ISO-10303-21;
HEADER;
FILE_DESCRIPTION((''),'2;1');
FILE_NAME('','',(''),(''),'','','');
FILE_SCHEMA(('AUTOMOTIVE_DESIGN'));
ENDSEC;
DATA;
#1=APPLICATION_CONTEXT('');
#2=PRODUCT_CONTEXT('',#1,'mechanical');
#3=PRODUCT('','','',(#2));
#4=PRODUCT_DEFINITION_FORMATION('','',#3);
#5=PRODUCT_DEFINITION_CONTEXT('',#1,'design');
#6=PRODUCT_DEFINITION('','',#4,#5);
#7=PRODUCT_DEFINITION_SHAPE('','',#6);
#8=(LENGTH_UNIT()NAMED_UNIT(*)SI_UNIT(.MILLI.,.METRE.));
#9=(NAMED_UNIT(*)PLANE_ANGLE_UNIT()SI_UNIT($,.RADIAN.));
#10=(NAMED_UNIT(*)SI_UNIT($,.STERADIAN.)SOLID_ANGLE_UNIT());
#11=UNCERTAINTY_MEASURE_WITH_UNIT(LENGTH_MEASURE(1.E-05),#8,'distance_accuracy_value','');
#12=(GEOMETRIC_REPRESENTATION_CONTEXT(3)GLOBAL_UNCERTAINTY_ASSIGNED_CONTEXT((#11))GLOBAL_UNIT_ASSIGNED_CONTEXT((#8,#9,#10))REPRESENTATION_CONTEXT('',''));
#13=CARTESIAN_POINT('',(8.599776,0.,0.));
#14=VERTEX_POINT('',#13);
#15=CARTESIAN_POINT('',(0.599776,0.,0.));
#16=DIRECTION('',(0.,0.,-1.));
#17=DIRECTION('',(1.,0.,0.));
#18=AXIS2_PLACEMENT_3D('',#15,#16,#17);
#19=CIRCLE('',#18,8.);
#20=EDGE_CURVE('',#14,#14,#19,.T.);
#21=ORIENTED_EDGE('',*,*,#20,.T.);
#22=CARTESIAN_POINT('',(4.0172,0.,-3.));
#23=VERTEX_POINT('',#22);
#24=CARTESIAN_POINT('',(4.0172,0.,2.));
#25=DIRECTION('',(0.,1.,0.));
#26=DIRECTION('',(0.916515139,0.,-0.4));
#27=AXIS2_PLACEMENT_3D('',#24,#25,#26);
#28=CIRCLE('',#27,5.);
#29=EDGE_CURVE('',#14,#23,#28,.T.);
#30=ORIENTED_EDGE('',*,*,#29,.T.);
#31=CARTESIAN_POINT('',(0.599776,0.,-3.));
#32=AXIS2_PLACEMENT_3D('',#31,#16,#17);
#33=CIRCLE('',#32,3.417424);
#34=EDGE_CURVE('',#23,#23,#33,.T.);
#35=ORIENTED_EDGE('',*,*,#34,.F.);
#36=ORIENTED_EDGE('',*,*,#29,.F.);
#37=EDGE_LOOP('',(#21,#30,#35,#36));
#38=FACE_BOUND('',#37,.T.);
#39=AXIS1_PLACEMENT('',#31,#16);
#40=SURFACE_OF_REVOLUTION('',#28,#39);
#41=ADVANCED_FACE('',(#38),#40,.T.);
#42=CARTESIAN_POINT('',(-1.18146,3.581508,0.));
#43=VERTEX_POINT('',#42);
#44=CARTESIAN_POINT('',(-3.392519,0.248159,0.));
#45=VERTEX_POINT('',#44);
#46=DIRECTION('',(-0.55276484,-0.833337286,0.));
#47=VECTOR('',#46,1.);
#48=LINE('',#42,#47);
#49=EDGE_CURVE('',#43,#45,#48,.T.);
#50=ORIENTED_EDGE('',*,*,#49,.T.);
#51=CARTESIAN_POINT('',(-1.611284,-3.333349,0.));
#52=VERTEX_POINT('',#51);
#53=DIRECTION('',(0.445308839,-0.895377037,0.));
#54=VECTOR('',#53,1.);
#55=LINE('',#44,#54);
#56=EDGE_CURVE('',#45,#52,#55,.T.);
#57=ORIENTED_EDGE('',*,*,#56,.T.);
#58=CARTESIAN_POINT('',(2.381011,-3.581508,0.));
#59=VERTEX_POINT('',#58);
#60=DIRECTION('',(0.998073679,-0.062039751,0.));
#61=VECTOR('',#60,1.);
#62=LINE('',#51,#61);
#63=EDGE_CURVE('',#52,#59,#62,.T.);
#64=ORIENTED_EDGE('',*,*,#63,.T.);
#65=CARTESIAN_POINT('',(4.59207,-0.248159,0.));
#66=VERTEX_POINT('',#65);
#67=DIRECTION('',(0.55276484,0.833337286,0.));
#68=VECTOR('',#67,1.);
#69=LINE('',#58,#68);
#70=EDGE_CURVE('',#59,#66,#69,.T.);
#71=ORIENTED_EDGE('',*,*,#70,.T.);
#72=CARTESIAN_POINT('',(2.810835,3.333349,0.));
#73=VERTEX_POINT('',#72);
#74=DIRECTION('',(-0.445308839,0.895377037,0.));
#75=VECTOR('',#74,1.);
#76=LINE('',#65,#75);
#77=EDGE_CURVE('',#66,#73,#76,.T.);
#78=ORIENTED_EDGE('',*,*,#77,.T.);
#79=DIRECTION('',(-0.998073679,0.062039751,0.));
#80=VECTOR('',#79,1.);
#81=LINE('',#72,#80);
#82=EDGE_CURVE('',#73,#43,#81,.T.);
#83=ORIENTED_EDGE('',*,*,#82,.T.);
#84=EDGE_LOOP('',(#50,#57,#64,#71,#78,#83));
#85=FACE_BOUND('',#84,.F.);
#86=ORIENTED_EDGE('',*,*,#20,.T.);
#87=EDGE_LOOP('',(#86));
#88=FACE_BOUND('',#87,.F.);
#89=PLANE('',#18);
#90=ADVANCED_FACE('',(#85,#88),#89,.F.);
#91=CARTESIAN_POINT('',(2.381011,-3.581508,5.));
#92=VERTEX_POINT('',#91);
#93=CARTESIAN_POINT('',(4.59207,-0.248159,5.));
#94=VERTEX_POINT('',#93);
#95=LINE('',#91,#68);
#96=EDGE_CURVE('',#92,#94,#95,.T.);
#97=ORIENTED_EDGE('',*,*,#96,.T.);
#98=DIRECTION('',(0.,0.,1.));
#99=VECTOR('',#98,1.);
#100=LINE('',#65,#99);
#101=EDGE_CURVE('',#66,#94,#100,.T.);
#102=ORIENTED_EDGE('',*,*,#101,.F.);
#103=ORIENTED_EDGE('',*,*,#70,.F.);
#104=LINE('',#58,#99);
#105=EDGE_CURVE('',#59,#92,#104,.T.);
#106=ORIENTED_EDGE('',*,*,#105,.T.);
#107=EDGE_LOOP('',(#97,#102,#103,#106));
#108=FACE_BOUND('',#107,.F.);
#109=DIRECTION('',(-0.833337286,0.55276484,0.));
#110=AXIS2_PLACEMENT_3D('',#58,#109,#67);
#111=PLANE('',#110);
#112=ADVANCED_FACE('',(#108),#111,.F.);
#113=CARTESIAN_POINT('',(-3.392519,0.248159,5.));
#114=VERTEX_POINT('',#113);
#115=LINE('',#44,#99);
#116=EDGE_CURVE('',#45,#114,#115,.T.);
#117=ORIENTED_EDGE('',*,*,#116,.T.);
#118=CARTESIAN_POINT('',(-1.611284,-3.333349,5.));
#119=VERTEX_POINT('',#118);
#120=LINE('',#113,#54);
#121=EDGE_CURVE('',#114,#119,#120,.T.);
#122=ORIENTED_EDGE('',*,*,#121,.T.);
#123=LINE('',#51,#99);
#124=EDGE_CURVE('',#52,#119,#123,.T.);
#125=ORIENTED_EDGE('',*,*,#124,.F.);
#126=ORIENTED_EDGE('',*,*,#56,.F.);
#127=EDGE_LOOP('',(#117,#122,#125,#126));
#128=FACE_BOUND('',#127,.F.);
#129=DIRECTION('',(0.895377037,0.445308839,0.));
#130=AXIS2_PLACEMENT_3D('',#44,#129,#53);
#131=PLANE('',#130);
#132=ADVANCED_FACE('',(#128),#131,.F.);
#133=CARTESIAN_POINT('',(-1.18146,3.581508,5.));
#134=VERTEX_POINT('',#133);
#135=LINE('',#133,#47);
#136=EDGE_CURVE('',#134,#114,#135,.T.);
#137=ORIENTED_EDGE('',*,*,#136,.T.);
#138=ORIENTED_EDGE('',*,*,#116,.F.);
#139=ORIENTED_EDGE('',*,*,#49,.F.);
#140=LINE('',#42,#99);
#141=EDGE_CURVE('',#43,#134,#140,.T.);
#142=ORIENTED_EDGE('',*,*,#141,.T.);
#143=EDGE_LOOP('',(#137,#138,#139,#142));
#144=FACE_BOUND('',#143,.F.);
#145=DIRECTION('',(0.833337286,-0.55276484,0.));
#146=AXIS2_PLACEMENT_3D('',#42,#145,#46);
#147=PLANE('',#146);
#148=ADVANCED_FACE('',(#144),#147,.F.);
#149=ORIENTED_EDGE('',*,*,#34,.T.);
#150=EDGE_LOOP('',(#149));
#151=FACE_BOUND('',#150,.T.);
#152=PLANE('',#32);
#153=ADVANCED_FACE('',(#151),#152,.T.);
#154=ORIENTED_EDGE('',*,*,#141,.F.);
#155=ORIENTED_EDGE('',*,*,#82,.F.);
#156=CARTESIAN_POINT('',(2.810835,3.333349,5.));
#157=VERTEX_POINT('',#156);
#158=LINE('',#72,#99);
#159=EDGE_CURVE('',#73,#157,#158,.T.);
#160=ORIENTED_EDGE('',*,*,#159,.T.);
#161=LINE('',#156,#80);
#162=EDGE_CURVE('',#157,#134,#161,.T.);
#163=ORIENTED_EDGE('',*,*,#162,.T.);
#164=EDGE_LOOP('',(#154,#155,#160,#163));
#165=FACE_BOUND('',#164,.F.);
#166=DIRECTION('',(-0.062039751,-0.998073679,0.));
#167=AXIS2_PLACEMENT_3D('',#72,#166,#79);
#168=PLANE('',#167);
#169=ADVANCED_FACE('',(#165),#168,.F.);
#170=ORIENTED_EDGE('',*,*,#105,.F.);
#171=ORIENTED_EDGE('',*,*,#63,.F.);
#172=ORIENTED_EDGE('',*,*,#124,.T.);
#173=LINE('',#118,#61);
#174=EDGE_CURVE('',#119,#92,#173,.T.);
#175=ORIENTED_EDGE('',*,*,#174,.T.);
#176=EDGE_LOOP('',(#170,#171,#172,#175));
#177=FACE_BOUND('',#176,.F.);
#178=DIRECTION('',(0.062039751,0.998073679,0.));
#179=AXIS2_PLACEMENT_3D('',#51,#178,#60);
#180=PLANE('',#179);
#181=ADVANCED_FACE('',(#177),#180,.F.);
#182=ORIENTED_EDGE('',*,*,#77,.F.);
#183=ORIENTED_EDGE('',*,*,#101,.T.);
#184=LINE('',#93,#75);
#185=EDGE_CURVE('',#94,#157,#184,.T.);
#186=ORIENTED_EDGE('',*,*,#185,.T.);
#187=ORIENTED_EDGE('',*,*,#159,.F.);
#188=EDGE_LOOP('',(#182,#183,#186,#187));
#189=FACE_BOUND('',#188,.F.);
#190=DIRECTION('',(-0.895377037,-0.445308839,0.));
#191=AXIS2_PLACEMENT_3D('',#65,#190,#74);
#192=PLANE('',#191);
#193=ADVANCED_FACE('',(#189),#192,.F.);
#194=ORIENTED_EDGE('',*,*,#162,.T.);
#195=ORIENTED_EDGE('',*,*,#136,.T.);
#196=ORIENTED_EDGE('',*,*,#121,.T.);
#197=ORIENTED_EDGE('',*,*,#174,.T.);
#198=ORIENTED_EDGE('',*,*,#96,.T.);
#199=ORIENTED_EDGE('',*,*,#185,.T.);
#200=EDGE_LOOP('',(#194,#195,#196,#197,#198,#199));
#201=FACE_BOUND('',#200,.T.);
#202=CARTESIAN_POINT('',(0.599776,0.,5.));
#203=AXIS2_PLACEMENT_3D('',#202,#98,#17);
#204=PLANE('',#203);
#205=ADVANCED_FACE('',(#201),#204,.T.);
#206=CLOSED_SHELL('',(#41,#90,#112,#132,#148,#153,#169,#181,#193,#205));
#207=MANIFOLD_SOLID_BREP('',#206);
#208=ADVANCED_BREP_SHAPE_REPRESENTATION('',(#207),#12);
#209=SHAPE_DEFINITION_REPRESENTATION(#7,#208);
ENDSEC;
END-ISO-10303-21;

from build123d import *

# Parameters (mm, degrees)
F1_DEPTH = 5
F2_R     = 8
F3_DEPTH = 3


# Not quite as in the source:
# - a fillet or chamfer that OpenCascade refuses, or shapes differently, is made with other operations: its cross-section is extruded or revolved along the edge and cut away or added


with BuildPart() as f1:
    # F0 (on Top) → F1 (new body)
    with BuildSketch(Plane.XY):
        Polygon((4.5920703038, -0.2481590048), (2.8108349475, 3.333349142), (-1.1814597696, 3.5815081468), (-3.3925191305, 0.2481590048), (-1.6112837742, -3.333349142), (2.3810109429, -3.5815081468), align=None)
    extrude(amount=F1_DEPTH)

    # F2 (on face) → F3 (join)
    with BuildSketch(Plane(origin=(0, 0, 0), x_dir=(1, 0, 0), z_dir=(0, 0, -1))):
        with Locations((0.5997755867, 0)):
            Circle(F2_R)
        Polygon((2.8108349475, -3.333349142), (-1.1814597696, -3.5815081468), (-3.3925191305, -0.2481590048), (-1.6112837742, 3.333349142), (2.3810109429, 3.5815081468), (4.5920703038, 0.2481590048), align=None, mode=Mode.SUBTRACT)
        Polygon((-3.3925191305, -0.2481590048), (-1.1814597696, -3.5815081468), (2.8108349475, -3.333349142), (4.5920703038, 0.2481590048), (2.3810109429, 3.5815081468), (-1.6112837742, 3.333349142), align=None)
    extrude(amount=F3_DEPTH)

    # F4: fillet of radius 5 on 1 edges, made by hand

    # F4_s1 → F4_t2 (revolve, cut)
    with BuildSketch(Plane.XZ):
        with BuildLine():
            ThreePointArc((8.5997755867, 0), (6.7558126792, -2.1833001327), (4.0171998917, -3))
            Line((4.0171998917, -3), (8.5997755867, -3))
            Line((8.5997755867, -3), (8.5997755867, 0))
        make_face()
    revolve(axis=Axis((0.5997755867, 0, -3), (0, 0, -1)), mode=Mode.SUBTRACT)


solid = f1.part
